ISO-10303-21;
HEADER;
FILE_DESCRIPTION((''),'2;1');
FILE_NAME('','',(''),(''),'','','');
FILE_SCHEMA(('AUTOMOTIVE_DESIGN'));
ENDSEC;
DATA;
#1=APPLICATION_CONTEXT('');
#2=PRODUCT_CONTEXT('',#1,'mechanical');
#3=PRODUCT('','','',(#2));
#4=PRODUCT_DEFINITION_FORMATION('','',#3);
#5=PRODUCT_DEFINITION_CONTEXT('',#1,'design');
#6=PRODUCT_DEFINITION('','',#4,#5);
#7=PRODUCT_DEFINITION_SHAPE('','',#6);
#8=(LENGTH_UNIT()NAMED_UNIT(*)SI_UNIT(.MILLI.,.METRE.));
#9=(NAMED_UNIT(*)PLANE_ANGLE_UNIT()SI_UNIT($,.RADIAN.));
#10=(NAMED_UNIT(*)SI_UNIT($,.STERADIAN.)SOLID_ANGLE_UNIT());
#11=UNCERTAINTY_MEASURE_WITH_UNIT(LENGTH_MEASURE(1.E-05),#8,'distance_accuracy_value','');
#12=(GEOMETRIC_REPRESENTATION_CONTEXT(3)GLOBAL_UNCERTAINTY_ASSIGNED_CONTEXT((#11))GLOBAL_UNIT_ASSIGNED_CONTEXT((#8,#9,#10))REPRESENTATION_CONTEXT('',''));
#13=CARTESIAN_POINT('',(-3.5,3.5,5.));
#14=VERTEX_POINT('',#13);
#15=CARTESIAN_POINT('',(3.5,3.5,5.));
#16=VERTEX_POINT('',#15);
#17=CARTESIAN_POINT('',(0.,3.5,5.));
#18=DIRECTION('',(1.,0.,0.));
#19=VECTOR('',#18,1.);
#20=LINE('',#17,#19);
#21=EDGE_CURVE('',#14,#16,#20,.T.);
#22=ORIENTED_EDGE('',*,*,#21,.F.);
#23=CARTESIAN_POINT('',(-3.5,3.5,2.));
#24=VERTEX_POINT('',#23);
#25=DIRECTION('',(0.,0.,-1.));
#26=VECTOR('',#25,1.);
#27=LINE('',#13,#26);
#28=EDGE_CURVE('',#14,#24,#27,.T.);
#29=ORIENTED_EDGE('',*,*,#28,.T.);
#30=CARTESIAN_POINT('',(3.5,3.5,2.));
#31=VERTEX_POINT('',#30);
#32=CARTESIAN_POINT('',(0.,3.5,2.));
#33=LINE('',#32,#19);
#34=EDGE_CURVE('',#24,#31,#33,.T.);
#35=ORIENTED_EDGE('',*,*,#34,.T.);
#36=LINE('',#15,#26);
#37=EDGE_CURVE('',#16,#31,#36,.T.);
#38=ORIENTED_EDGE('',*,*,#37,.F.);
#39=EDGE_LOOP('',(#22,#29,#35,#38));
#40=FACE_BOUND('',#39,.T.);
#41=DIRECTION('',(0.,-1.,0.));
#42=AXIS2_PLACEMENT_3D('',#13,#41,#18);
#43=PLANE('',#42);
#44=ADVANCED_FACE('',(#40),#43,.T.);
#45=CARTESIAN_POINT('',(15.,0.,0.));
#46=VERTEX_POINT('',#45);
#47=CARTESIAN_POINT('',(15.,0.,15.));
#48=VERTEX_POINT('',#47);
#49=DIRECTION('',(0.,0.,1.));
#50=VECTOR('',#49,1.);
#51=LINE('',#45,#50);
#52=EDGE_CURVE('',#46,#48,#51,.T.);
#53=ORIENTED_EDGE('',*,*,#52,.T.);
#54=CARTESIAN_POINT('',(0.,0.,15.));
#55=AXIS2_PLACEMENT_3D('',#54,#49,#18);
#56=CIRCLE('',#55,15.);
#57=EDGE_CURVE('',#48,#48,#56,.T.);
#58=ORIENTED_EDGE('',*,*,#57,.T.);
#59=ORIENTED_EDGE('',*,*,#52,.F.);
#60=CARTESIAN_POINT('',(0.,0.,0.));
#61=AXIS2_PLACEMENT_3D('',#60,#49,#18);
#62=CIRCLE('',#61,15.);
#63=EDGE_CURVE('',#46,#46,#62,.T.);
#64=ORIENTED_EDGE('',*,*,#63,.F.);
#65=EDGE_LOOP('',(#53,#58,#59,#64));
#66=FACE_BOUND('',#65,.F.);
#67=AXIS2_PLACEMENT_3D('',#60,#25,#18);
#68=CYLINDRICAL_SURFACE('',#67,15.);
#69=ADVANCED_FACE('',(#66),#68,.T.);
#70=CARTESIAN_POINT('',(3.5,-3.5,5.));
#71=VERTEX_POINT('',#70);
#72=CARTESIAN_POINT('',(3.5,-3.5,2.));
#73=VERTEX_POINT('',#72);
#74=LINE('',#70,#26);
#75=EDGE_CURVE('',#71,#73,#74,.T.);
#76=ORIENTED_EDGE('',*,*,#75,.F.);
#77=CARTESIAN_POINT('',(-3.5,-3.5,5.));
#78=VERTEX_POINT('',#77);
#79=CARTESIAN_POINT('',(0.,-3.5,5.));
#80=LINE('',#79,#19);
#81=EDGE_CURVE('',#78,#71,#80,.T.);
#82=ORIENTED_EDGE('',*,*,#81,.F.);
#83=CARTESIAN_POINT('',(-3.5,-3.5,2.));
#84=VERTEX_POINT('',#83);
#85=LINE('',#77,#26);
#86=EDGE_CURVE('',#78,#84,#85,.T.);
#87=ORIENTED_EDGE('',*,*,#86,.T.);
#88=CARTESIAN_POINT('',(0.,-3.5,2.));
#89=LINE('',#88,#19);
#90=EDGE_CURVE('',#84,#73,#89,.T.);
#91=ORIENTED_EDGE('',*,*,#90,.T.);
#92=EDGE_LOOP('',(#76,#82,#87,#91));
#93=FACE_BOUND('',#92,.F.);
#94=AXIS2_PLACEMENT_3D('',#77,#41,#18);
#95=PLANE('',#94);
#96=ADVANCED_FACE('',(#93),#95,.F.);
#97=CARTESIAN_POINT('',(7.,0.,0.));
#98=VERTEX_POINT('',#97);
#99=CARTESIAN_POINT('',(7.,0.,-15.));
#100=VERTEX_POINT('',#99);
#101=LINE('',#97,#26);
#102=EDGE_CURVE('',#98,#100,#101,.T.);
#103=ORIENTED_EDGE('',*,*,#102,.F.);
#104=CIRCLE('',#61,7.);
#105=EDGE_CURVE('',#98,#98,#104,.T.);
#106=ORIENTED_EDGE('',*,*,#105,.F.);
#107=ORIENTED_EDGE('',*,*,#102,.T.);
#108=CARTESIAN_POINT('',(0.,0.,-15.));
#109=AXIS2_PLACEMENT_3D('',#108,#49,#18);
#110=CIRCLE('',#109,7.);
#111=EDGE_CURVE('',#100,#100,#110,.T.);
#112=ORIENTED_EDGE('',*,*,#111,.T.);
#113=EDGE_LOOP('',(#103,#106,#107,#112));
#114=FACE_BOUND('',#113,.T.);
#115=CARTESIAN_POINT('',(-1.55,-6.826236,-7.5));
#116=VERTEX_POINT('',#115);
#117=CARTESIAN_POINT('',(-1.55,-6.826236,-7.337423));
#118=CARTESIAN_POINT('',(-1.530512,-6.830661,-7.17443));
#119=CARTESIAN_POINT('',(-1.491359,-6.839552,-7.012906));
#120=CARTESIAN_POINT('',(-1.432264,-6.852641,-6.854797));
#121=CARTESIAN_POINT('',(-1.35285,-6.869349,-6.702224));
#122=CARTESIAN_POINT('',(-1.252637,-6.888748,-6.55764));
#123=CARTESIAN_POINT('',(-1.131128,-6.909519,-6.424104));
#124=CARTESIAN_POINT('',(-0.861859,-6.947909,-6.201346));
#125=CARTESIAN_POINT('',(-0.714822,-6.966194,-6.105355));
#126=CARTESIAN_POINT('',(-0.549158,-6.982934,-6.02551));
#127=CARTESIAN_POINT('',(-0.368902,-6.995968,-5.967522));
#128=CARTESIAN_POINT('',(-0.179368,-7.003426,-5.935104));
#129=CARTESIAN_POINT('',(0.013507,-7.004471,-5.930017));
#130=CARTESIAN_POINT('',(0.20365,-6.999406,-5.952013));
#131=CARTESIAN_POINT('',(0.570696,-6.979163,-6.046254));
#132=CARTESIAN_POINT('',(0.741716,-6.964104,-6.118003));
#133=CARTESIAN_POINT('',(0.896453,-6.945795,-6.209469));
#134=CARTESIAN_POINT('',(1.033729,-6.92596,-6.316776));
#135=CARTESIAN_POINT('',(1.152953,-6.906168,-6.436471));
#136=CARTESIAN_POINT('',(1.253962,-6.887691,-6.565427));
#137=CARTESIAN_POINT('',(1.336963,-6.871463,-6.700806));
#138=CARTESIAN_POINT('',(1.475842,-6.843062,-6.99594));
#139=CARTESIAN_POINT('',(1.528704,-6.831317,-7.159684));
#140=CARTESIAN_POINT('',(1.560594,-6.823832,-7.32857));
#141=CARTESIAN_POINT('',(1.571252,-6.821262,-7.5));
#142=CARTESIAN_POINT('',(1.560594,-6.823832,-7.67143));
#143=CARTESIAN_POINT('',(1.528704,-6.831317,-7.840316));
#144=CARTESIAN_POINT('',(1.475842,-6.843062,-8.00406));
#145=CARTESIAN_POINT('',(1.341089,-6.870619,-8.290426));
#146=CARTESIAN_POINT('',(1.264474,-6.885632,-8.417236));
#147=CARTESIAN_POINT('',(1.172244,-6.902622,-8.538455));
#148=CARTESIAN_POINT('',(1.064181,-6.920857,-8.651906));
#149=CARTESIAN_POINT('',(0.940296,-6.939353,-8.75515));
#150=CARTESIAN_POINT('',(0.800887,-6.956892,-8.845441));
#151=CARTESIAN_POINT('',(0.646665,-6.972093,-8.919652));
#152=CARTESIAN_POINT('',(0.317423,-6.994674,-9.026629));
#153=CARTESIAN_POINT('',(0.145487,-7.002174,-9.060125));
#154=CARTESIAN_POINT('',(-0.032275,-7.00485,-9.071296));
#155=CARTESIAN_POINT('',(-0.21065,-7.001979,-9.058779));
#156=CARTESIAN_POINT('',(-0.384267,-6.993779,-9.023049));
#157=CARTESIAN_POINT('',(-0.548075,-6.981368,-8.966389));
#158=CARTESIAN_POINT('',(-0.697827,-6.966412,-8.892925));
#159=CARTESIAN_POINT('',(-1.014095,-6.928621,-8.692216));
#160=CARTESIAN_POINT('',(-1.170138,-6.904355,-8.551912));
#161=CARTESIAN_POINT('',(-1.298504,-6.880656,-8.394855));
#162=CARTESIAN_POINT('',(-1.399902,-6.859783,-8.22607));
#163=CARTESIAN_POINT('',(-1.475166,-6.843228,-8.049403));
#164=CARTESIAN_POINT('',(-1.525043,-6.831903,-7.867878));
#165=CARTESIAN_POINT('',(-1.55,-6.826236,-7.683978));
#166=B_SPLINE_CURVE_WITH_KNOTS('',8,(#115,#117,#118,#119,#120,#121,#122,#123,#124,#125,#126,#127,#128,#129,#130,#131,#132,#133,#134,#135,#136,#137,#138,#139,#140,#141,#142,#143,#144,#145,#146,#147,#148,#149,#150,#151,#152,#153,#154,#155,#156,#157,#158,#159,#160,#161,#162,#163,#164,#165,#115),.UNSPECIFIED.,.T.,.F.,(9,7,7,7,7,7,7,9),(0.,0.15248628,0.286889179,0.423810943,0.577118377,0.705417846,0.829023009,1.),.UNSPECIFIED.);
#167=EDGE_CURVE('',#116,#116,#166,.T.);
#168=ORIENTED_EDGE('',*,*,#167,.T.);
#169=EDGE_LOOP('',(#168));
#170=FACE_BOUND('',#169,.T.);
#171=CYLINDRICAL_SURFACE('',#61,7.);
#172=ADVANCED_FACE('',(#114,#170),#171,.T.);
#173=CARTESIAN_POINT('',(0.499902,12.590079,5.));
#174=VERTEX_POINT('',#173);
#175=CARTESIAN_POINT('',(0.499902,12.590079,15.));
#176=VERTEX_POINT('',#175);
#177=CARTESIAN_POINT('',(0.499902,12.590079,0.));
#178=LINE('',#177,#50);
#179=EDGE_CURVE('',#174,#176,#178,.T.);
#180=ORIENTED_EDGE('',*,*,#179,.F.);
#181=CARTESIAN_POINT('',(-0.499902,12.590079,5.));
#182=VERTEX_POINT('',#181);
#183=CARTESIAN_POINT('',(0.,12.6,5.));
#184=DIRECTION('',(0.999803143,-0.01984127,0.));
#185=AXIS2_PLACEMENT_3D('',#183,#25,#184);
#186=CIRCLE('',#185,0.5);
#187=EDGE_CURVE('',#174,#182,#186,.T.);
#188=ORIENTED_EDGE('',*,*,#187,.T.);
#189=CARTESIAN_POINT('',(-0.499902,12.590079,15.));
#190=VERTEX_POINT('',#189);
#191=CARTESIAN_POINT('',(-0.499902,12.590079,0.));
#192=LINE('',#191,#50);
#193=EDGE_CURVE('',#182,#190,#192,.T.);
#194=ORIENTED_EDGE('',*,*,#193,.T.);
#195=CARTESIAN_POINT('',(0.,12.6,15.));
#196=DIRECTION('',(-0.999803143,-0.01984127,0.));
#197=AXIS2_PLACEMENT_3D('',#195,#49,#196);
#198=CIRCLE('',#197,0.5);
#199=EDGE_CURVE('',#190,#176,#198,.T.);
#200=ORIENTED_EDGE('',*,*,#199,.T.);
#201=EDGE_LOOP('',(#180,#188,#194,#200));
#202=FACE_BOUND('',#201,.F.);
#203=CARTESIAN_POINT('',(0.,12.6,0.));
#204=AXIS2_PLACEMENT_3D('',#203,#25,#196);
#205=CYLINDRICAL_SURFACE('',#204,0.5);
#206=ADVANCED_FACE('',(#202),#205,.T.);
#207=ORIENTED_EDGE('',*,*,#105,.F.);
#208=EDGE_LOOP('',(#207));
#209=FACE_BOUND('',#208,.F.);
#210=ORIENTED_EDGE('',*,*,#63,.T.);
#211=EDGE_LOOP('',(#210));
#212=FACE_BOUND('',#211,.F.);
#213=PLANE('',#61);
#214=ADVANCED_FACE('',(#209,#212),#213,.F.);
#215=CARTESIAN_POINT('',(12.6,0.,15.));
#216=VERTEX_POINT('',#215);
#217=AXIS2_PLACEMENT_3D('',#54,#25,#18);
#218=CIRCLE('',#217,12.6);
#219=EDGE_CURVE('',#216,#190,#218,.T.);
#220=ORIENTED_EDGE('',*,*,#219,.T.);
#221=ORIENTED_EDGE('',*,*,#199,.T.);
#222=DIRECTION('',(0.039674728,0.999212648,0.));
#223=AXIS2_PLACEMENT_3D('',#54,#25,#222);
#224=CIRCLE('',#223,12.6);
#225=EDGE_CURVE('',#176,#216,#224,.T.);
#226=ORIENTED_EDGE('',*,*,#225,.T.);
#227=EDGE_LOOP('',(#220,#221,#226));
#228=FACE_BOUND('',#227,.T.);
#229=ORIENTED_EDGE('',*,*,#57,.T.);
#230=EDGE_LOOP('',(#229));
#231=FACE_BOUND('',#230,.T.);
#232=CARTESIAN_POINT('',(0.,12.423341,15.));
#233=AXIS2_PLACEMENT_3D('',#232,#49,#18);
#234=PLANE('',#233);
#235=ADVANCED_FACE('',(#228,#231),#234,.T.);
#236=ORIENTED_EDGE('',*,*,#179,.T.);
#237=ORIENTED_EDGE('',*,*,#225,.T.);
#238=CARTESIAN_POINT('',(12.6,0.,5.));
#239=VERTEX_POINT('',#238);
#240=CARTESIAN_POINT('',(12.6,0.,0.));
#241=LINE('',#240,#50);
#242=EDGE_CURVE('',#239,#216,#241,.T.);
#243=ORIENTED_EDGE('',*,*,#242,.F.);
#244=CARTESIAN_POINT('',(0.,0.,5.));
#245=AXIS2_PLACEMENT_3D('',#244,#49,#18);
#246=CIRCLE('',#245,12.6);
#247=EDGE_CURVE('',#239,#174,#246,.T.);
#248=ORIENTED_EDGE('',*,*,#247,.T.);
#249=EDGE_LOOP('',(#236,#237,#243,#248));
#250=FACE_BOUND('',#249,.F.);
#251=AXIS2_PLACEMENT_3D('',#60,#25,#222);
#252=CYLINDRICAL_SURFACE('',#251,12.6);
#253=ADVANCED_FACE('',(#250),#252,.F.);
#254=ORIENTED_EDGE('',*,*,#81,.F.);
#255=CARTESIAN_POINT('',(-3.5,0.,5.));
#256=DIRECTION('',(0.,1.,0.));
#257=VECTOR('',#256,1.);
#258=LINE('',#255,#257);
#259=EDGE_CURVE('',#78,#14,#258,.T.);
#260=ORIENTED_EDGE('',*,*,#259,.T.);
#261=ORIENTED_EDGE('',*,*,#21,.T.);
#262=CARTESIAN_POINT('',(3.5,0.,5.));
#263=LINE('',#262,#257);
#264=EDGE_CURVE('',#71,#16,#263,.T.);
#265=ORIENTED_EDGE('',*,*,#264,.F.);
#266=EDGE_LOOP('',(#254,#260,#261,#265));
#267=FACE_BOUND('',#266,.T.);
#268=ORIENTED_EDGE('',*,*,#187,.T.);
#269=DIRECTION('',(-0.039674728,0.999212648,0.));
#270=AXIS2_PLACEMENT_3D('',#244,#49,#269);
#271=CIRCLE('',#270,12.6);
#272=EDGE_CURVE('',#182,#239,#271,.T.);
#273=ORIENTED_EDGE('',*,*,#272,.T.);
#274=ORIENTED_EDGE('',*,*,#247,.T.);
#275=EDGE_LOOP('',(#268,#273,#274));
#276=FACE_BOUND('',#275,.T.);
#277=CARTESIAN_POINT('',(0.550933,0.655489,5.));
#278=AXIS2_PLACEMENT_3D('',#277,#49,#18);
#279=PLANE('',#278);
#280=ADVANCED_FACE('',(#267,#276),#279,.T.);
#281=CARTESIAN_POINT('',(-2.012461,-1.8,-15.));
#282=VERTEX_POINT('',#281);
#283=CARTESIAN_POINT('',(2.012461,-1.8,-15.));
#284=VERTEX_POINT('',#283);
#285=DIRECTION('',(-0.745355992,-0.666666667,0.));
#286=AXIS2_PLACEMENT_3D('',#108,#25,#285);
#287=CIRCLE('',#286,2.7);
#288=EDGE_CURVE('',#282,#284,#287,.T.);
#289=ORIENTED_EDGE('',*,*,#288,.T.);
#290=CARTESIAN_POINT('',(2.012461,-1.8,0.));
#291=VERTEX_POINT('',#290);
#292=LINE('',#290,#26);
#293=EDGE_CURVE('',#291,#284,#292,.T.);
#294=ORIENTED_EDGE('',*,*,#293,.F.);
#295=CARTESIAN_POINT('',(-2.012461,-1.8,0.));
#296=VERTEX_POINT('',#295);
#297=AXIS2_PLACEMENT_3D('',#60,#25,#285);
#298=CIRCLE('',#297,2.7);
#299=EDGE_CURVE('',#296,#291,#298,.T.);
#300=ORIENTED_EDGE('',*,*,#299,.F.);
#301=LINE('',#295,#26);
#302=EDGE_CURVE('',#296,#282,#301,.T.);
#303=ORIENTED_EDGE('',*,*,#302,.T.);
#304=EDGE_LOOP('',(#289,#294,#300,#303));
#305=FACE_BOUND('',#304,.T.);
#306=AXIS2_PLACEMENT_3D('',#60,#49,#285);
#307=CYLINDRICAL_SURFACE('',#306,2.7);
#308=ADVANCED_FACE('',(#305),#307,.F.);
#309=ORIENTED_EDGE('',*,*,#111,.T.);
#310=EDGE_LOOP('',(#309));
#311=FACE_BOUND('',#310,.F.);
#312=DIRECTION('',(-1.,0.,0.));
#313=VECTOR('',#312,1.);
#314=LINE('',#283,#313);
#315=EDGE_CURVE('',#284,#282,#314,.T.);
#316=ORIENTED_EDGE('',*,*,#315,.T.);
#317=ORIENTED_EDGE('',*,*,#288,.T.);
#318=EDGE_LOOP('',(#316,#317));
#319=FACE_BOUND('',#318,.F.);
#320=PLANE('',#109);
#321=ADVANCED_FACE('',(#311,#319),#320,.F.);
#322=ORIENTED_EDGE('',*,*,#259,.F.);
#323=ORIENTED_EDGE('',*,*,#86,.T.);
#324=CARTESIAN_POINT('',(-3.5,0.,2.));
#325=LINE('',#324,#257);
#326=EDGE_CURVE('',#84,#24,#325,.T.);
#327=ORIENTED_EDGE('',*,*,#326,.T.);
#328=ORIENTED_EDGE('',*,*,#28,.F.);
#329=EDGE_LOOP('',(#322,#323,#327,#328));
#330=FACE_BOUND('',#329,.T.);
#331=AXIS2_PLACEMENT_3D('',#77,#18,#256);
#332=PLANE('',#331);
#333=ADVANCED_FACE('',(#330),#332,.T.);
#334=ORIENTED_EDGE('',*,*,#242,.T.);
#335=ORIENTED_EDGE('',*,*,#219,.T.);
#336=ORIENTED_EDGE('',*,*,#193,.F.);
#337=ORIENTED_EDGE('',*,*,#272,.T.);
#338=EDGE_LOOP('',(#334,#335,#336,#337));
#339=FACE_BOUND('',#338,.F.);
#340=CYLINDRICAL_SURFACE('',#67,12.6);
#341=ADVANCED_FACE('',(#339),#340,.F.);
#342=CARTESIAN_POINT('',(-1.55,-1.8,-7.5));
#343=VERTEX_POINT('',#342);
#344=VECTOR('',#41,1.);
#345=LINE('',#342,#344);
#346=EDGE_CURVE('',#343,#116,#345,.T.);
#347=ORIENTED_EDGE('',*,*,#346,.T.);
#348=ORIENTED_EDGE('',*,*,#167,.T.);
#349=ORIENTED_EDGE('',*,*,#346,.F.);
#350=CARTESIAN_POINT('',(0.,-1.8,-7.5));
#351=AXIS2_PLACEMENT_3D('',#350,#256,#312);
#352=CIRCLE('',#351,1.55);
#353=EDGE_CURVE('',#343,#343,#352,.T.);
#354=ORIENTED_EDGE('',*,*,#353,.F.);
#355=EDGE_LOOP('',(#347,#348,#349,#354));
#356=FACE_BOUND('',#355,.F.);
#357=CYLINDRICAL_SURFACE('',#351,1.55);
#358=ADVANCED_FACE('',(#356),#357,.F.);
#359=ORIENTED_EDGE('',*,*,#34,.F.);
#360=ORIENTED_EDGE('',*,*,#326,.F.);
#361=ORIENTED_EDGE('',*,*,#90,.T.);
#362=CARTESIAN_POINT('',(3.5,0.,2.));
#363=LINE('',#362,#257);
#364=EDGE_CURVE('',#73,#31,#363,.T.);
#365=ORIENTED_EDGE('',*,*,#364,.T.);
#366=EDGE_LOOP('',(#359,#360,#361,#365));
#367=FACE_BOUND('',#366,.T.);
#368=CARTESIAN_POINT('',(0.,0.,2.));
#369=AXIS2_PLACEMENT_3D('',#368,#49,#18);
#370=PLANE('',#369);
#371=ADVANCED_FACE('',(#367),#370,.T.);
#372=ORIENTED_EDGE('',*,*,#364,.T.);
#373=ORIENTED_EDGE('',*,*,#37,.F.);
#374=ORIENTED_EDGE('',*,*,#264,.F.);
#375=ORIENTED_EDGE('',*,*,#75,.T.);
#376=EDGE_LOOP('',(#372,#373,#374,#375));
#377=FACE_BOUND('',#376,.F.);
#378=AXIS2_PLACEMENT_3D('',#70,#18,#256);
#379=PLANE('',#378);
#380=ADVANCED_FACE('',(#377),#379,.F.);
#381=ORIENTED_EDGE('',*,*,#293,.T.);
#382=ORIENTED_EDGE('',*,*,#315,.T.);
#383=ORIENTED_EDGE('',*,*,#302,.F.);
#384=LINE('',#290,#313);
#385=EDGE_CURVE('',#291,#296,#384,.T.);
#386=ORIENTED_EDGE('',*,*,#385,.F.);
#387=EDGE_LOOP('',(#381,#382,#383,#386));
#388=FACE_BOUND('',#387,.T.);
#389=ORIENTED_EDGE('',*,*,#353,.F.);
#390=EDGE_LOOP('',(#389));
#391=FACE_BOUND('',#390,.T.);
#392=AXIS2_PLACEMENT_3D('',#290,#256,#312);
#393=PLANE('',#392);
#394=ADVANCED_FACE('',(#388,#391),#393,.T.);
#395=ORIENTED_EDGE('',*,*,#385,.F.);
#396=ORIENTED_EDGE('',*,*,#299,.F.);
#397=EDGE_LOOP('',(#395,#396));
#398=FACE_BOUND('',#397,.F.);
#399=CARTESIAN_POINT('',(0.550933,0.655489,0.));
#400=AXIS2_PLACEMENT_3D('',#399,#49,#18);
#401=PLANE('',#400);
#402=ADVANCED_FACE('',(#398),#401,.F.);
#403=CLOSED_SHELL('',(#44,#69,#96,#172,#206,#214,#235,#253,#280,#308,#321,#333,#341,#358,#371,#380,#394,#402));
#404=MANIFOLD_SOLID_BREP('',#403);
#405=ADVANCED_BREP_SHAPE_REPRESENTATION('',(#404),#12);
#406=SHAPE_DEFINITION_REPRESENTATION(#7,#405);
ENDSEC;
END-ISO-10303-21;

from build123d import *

# Parameters (mm, degrees)
F0_R     = 7
F1_DEPTH = 15
F2_DEPTH = 5
F0_R_2   = 15
F3_DEPTH = 15
F5_D     = 3.1
F5_DEPTH = 13.201
F6_DEPTH = 15
F7_W     = 7
F7_H     = 7
F8_DEPTH = 3


with BuildPart() as f1:
    # F0 (on Top) → F1 (new body)
    with BuildSketch(Plane.XY):
        Circle(F0_R)
        with BuildLine():
            Line((2.0124611797, -1.8), (-2.0124611797, -1.8))
            ThreePointArc((-2.0124611797, -1.8), (0, 2.7), (2.0124611797, -1.8))
        make_face(mode=Mode.SUBTRACT)
    extrude(amount=-F1_DEPTH)

    # F0 (on Top) → F2 (join)
    with BuildSketch(Plane.XY):
        with BuildLine():
            ThreePointArc((-0.4999015713, 12.5900793651), (-8.731014838, -9.0845682286), (12.6, 0))
            ThreePointArc((12.6, 0), (9.0845682286, 8.731014838), (0.4999015713, 12.5900793651))
            ThreePointArc((0.4999015713, 12.5900793651), (0, 12.1), (-0.4999015713, 12.5900793651))
        make_face()
        Circle(F0_R, mode=Mode.SUBTRACT)
        Circle(F0_R)
        with BuildLine():
            Line((2.0124611797, -1.8), (-2.0124611797, -1.8))
            ThreePointArc((-2.0124611797, -1.8), (0, 2.7), (2.0124611797, -1.8))
        make_face(mode=Mode.SUBTRACT)
        with BuildLine():
            ThreePointArc((2.0124611797, -1.8), (0, 2.7), (-2.0124611797, -1.8))
            Line((-2.0124611797, -1.8), (2.0124611797, -1.8))
        make_face()
    extrude(amount=F2_DEPTH)

    # F0 (on Top) → F3 (join)
    with BuildSketch(Plane.XY):
        Circle(F0_R_2)
        with BuildLine():
            ThreePointArc((0.4999015713, 12.5900793651), (9.0845682286, 8.731014838), (12.6, 0))
            ThreePointArc((12.6, 0), (-8.731014838, -9.0845682286), (-0.4999015713, 12.5900793651))
            ThreePointArc((-0.4999015713, 12.5900793651), (0, 12.6), (0.4999015713, 12.5900793651))
        make_face(mode=Mode.SUBTRACT)
    extrude(amount=F3_DEPTH)

    # F5 (through all, one way)
    with BuildSketch(Plane(origin=(0, -1.8, 0), x_dir=(-1, 0, 0), z_dir=(0, 1, 0))):
        with Locations((0, -7.5)):
            Circle(F5_D / 2)
    extrude(amount=-F5_DEPTH, mode=Mode.SUBTRACT)

    # F0 (on Top) → F6 (join)
    with BuildSketch(Plane.XY):
        with BuildLine():
            ThreePointArc((-0.4999015713, 12.5900793651), (0, 12.1), (0.4999015713, 12.5900793651))
            ThreePointArc((0.4999015713, 12.5900793651), (0, 12.6), (-0.4999015713, 12.5900793651))
        make_face()
    extrude(amount=F6_DEPTH)

    # F7 (on face) → F8 (cut)
    with BuildSketch(Plane.XY.offset(5)):
        Rectangle(F7_W, F7_H)
    extrude(amount=-F8_DEPTH, mode=Mode.SUBTRACT)


solid = f1.part
